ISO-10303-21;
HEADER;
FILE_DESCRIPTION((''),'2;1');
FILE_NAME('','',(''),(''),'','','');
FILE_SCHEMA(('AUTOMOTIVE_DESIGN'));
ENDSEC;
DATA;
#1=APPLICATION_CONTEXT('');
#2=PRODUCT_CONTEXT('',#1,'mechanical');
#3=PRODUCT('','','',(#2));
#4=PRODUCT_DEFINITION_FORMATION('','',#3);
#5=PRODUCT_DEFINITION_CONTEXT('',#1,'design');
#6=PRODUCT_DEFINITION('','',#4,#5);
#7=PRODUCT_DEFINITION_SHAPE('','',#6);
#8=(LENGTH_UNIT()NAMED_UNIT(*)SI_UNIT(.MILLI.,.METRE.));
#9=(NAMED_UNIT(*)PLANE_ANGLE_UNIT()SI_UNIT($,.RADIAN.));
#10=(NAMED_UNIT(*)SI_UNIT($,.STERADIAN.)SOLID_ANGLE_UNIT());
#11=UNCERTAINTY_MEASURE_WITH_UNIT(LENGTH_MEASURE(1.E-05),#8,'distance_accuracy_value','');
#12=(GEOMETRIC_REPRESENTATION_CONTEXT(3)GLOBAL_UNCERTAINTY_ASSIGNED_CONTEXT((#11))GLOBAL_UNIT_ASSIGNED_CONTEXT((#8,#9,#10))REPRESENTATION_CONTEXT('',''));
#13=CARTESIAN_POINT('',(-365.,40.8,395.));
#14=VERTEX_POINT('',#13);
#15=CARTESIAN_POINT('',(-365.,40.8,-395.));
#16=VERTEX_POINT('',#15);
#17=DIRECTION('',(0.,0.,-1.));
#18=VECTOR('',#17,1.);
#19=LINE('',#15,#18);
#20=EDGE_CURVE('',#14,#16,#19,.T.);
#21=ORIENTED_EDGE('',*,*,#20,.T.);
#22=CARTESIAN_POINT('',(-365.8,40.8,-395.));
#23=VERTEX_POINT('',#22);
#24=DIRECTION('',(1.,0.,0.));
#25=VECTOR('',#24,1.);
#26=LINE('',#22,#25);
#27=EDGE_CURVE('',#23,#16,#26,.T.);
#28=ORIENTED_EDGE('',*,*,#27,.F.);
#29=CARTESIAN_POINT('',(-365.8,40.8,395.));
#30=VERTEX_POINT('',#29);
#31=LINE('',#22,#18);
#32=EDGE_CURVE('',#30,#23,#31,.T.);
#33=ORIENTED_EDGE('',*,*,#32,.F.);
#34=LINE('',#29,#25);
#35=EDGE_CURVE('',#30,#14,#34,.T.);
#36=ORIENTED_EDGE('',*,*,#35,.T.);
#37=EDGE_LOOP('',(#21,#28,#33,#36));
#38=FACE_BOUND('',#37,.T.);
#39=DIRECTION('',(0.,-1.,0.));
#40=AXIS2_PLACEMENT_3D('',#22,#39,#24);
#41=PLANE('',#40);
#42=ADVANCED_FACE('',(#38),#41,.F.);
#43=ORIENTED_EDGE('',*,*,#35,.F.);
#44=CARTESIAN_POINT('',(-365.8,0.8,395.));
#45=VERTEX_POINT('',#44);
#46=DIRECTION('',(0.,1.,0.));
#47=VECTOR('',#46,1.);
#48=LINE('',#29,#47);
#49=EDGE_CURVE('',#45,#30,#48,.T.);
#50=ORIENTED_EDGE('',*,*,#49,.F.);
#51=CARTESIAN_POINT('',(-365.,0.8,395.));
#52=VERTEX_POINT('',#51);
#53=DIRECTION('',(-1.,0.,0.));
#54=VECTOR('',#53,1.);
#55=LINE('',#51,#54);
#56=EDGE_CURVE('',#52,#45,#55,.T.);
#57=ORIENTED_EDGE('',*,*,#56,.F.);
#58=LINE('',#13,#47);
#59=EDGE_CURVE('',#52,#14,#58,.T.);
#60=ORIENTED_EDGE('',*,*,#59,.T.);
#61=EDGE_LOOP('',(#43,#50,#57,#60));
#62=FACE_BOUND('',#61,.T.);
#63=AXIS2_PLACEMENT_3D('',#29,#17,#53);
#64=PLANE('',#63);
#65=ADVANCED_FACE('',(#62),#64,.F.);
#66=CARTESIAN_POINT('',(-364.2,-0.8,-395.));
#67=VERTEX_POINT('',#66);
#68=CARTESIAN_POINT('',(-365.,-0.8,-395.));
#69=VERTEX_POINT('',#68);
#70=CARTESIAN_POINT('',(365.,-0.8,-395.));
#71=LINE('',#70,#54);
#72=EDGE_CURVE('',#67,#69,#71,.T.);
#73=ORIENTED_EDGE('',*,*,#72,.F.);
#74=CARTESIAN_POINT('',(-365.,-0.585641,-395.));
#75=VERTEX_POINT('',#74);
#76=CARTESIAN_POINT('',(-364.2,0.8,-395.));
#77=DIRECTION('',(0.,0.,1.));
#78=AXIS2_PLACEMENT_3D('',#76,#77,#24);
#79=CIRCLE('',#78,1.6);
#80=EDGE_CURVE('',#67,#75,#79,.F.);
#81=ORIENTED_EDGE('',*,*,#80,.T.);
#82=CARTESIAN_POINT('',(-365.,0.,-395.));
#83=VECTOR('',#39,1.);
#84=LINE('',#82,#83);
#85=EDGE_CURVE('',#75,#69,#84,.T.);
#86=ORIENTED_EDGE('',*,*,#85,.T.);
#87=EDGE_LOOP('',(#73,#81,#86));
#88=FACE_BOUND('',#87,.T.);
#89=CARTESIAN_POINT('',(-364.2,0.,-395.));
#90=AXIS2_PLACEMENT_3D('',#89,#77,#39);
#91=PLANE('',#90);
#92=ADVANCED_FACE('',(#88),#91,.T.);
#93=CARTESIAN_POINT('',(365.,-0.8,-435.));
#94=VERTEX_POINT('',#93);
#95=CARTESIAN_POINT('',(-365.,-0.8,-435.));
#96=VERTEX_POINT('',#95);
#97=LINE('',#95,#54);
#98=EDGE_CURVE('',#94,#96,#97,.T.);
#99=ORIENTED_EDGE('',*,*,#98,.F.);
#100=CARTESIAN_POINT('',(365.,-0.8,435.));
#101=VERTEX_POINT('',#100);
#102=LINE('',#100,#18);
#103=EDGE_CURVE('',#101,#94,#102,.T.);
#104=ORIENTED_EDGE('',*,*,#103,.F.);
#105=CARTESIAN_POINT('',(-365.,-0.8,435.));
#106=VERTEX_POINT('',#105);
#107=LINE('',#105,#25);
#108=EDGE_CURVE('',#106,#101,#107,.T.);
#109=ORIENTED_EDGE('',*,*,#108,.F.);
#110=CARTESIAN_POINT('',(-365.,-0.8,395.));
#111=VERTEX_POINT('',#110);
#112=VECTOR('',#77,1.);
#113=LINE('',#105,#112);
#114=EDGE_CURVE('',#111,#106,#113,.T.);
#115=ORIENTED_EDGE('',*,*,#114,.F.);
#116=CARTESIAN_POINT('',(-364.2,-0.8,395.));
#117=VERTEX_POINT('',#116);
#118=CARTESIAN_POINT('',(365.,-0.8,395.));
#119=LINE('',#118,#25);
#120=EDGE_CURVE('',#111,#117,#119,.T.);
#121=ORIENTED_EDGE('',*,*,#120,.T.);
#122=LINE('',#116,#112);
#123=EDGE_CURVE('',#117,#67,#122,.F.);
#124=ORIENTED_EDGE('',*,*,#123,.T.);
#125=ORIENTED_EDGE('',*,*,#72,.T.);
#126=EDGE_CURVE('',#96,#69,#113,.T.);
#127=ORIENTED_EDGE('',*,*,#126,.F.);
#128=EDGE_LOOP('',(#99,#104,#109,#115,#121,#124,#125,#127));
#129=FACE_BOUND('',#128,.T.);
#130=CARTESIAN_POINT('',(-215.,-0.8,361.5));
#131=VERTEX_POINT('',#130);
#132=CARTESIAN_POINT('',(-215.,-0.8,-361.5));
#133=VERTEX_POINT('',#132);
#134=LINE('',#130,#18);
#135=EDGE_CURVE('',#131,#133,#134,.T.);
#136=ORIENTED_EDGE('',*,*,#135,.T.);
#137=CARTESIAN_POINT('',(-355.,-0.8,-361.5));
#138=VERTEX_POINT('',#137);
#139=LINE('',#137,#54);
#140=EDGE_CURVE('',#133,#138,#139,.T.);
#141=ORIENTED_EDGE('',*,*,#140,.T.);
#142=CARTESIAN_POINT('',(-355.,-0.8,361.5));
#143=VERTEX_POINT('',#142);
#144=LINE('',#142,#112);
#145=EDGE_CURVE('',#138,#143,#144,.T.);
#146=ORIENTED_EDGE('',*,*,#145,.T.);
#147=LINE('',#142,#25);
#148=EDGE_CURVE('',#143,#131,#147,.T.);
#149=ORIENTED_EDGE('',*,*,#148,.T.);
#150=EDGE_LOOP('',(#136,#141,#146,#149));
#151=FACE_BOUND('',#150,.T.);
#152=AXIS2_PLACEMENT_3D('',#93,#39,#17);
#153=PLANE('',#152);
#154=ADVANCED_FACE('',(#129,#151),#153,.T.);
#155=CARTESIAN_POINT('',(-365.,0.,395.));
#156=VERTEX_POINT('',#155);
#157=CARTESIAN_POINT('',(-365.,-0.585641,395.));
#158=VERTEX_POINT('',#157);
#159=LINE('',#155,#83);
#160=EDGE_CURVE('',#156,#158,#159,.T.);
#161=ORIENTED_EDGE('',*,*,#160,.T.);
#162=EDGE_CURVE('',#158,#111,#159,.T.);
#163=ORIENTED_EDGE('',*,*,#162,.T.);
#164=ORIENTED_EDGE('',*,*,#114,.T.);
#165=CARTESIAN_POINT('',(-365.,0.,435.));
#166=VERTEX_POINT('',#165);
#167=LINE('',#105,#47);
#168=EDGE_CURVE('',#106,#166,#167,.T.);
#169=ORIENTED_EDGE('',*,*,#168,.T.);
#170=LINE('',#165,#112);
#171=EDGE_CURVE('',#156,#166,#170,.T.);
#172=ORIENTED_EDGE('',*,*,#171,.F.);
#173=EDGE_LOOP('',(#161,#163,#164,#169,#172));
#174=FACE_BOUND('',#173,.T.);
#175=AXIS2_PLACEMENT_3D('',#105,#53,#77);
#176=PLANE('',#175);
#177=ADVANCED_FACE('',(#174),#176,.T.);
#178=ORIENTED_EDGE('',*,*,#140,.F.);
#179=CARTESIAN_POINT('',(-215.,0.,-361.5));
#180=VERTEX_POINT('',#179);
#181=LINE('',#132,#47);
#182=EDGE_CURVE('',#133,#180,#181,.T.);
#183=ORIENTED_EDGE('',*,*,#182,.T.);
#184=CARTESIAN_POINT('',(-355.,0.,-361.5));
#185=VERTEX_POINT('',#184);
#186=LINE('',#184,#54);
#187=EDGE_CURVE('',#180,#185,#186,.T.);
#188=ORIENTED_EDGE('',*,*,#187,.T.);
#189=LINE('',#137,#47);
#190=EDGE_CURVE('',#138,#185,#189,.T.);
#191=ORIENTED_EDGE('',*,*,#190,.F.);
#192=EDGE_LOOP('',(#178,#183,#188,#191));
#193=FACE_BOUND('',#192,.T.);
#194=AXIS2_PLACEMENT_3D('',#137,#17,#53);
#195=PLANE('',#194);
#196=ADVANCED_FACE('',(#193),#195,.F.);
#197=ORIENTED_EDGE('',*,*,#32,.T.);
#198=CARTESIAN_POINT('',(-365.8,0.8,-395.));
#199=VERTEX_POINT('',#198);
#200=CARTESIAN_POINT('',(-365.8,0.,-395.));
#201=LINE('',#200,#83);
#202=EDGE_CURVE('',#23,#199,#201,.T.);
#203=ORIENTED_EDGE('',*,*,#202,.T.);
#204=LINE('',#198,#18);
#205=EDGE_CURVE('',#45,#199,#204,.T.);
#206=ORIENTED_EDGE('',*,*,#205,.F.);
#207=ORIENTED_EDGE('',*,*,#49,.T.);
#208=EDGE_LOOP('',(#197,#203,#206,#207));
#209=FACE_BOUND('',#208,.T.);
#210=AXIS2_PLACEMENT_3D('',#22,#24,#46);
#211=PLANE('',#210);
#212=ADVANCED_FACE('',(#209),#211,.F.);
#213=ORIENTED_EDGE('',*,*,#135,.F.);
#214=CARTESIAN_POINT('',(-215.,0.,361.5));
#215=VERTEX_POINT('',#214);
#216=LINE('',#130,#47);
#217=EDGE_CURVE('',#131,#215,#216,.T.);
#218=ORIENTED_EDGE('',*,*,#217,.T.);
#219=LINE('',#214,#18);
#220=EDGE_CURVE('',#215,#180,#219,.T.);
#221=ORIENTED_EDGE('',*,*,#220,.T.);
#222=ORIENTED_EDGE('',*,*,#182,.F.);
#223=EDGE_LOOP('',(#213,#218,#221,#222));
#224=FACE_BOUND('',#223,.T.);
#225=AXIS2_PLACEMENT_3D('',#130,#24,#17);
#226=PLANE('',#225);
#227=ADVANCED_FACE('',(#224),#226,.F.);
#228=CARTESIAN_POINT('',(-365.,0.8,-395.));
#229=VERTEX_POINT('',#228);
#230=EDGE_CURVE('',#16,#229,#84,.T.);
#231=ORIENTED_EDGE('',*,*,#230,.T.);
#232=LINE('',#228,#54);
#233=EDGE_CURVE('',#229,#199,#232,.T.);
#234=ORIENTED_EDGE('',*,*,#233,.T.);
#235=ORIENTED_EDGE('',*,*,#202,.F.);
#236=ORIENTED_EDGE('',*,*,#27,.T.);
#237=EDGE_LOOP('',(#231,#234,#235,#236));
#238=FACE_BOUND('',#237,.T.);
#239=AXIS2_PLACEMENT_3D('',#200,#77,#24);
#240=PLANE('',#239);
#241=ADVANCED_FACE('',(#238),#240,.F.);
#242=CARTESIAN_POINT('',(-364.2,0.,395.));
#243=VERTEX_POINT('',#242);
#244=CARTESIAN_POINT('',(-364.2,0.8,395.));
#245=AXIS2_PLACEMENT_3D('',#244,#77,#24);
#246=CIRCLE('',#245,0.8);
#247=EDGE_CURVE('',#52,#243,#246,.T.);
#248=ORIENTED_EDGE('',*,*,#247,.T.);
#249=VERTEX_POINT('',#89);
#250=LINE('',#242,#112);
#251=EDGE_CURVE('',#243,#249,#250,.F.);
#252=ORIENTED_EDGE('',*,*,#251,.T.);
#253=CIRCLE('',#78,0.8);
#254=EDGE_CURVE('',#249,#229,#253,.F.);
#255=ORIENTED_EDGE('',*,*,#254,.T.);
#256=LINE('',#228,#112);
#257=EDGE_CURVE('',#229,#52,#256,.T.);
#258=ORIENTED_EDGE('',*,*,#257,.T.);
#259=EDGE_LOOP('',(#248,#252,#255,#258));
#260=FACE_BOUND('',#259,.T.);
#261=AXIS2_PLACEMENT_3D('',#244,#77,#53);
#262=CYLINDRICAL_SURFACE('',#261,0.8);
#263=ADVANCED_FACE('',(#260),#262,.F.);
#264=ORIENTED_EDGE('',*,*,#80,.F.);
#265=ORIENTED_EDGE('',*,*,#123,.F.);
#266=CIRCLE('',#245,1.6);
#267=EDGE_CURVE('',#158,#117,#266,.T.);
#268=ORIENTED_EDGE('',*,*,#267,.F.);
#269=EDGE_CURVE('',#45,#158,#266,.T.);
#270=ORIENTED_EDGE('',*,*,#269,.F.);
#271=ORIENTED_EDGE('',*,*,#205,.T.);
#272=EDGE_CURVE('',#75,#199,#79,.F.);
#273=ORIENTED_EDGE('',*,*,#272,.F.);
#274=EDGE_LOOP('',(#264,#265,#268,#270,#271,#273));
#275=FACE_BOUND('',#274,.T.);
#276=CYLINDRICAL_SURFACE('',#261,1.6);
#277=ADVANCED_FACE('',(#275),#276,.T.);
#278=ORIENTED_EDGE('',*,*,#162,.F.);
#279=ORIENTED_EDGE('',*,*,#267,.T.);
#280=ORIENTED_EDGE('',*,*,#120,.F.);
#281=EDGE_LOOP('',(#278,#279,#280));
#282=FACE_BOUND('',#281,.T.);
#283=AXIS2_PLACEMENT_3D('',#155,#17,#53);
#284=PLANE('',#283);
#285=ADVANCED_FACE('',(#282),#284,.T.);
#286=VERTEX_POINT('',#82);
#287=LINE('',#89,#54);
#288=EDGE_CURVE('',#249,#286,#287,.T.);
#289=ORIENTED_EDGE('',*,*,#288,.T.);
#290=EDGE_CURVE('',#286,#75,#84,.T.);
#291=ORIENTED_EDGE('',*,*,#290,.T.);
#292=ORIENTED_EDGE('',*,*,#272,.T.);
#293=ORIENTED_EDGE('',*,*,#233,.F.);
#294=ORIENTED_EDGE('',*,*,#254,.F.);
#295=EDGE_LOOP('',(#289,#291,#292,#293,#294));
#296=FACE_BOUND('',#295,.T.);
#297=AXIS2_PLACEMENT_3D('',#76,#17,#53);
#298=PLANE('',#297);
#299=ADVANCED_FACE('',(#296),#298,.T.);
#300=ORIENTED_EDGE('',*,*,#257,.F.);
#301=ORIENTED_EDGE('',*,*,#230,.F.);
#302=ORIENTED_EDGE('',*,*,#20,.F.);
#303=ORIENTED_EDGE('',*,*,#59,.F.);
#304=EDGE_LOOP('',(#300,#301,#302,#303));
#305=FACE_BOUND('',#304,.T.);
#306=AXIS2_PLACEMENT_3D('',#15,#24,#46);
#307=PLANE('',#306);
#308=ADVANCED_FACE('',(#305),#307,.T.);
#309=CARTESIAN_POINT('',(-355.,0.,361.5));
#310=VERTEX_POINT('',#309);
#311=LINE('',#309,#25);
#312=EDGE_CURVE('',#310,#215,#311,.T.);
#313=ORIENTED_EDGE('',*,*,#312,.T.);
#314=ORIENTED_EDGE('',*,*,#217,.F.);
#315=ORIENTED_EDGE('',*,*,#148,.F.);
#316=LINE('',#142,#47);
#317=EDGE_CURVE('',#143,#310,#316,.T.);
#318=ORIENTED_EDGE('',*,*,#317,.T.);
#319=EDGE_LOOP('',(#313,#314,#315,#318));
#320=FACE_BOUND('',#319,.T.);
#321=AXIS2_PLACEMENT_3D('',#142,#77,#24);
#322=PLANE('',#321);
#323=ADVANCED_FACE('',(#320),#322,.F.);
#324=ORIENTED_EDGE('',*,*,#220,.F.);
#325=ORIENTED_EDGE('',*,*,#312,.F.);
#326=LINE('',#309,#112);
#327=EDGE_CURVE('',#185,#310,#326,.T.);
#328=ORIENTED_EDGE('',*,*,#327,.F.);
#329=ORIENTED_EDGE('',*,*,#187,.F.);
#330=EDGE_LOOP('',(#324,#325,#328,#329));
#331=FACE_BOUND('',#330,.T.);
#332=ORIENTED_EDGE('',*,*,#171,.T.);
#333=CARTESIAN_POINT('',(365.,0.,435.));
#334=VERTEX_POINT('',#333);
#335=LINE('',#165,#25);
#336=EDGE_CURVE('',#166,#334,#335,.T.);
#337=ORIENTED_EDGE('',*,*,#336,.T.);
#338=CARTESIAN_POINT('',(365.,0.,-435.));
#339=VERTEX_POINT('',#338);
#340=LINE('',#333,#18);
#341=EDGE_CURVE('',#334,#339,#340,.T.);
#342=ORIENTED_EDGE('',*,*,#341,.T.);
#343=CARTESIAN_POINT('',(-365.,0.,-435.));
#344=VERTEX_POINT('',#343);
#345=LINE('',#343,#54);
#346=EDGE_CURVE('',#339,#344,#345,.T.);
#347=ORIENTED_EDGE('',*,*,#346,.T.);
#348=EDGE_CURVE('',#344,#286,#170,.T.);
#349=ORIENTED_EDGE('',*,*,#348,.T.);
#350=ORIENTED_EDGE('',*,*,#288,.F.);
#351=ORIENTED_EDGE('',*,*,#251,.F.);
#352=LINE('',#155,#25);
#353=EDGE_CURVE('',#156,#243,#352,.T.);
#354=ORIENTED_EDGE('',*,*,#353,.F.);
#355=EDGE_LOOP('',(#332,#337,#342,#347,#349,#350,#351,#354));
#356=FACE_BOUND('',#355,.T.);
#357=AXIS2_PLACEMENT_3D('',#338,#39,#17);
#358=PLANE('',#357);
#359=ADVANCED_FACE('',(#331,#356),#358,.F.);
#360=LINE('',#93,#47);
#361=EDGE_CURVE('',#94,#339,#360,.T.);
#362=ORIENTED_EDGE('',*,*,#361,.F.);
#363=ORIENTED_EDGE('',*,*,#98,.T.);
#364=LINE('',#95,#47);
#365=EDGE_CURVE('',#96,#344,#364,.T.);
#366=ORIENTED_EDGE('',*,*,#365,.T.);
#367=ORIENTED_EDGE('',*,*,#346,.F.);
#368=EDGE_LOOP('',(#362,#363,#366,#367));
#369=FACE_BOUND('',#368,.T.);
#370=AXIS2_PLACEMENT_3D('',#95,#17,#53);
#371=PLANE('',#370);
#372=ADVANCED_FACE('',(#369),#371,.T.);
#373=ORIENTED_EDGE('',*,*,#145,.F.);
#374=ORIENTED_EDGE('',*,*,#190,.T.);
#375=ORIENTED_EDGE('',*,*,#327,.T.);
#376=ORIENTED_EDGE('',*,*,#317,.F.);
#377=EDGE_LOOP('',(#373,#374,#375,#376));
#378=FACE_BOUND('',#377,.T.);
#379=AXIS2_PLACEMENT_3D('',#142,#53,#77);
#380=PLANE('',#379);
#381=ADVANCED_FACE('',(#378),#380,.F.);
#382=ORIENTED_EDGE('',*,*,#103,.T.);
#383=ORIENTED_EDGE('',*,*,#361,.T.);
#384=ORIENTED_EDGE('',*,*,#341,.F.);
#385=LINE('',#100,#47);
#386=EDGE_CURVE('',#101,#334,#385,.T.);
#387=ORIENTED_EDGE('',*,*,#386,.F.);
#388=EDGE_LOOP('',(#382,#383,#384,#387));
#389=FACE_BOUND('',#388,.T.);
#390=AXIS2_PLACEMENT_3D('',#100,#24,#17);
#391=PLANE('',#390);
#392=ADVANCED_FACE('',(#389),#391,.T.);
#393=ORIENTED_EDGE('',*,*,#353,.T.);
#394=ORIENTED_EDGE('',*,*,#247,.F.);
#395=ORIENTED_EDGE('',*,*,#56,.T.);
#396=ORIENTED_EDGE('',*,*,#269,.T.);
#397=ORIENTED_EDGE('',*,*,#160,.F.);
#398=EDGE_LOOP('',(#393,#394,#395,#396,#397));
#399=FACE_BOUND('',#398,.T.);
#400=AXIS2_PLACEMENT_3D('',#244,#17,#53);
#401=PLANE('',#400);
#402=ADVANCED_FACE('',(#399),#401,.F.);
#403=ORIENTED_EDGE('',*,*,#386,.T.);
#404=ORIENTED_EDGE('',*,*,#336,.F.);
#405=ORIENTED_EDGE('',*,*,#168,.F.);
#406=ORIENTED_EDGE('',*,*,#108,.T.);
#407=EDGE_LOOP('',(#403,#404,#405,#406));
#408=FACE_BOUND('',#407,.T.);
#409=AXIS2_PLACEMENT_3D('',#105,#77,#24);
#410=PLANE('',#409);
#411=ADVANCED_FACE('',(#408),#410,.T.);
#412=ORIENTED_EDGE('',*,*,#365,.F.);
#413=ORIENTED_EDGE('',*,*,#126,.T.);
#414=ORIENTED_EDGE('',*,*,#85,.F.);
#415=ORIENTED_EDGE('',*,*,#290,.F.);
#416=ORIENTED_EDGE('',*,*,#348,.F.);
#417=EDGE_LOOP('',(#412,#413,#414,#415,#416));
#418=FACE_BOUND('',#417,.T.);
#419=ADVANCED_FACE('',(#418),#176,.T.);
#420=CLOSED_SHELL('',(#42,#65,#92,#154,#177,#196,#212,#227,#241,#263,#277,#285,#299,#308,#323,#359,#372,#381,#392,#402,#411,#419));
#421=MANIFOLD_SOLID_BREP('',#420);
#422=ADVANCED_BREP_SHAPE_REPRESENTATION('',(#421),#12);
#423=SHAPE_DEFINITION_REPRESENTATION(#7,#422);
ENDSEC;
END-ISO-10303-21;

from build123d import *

# Parameters (mm, degrees)
SKETCH1_W                    = 730
SKETCH1_H                    = 870
SKETCH1_W_2                  = 140
SKETCH1_H_2                  = 723
BASE_FLANGE1_DEPTH           = 0.8
EDGE_FLANGE1_STRIP_W         = 4.8
EDGE_FLANGE1_STRIP_H         = 0.8
EDGE_FLANGE1_STRIP_CUT_DEPTH = 790
EDGE_FLANGE1_DEPTH           = 790


# Sheet-metal steps are written as plain solids
with BuildPart() as part:
    # Sketch1 → Base-Flange1 (new body)
    with BuildSketch(Plane(origin=(0, 0, 0), x_dir=(1, 0, 0), z_dir=(0, 1, 0))):
        Rectangle(SKETCH1_W, SKETCH1_H)
        with Locations((-285, 0)):
            Rectangle(SKETCH1_W_2, SKETCH1_H_2, mode=Mode.SUBTRACT)
    extrude(amount=-BASE_FLANGE1_DEPTH)

    # Edge-Flange1 strip (across the edge) → Edge-Flange1 strip cut (cut)
    with BuildSketch(Plane(origin=(-365, 0, -395), x_dir=(1, 0, 0), z_dir=(0, 0, 1))):
        with Locations((-1.6, -0.4)):
            Rectangle(EDGE_FLANGE1_STRIP_W, EDGE_FLANGE1_STRIP_H)
    extrude(amount=EDGE_FLANGE1_STRIP_CUT_DEPTH, mode=Mode.SUBTRACT)

    # Edge-Flange1 section (across the edge) → Edge-Flange1 (add)
    with BuildSketch(Plane(origin=(-365, 0, -395), x_dir=(1, 0, 0), z_dir=(0, 0, 1))):
        with BuildLine():
            Line((-0.8, 0.8), (-0.8, 40.8))
            Line((-0.8, 40.8), (0, 40.8))
            Line((0, 40.8), (0, 0.8))
            ThreePointArc((0, 0.8), (0.234314575, 0.234314575), (0.8, 0))
            Line((0.8, 0), (0.8, -0.8))
            ThreePointArc((0.8, -0.8), (-0.33137085, -0.33137085), (-0.8, 0.8))
        make_face()
    extrude(amount=EDGE_FLANGE1_DEPTH)


solid = part.part
